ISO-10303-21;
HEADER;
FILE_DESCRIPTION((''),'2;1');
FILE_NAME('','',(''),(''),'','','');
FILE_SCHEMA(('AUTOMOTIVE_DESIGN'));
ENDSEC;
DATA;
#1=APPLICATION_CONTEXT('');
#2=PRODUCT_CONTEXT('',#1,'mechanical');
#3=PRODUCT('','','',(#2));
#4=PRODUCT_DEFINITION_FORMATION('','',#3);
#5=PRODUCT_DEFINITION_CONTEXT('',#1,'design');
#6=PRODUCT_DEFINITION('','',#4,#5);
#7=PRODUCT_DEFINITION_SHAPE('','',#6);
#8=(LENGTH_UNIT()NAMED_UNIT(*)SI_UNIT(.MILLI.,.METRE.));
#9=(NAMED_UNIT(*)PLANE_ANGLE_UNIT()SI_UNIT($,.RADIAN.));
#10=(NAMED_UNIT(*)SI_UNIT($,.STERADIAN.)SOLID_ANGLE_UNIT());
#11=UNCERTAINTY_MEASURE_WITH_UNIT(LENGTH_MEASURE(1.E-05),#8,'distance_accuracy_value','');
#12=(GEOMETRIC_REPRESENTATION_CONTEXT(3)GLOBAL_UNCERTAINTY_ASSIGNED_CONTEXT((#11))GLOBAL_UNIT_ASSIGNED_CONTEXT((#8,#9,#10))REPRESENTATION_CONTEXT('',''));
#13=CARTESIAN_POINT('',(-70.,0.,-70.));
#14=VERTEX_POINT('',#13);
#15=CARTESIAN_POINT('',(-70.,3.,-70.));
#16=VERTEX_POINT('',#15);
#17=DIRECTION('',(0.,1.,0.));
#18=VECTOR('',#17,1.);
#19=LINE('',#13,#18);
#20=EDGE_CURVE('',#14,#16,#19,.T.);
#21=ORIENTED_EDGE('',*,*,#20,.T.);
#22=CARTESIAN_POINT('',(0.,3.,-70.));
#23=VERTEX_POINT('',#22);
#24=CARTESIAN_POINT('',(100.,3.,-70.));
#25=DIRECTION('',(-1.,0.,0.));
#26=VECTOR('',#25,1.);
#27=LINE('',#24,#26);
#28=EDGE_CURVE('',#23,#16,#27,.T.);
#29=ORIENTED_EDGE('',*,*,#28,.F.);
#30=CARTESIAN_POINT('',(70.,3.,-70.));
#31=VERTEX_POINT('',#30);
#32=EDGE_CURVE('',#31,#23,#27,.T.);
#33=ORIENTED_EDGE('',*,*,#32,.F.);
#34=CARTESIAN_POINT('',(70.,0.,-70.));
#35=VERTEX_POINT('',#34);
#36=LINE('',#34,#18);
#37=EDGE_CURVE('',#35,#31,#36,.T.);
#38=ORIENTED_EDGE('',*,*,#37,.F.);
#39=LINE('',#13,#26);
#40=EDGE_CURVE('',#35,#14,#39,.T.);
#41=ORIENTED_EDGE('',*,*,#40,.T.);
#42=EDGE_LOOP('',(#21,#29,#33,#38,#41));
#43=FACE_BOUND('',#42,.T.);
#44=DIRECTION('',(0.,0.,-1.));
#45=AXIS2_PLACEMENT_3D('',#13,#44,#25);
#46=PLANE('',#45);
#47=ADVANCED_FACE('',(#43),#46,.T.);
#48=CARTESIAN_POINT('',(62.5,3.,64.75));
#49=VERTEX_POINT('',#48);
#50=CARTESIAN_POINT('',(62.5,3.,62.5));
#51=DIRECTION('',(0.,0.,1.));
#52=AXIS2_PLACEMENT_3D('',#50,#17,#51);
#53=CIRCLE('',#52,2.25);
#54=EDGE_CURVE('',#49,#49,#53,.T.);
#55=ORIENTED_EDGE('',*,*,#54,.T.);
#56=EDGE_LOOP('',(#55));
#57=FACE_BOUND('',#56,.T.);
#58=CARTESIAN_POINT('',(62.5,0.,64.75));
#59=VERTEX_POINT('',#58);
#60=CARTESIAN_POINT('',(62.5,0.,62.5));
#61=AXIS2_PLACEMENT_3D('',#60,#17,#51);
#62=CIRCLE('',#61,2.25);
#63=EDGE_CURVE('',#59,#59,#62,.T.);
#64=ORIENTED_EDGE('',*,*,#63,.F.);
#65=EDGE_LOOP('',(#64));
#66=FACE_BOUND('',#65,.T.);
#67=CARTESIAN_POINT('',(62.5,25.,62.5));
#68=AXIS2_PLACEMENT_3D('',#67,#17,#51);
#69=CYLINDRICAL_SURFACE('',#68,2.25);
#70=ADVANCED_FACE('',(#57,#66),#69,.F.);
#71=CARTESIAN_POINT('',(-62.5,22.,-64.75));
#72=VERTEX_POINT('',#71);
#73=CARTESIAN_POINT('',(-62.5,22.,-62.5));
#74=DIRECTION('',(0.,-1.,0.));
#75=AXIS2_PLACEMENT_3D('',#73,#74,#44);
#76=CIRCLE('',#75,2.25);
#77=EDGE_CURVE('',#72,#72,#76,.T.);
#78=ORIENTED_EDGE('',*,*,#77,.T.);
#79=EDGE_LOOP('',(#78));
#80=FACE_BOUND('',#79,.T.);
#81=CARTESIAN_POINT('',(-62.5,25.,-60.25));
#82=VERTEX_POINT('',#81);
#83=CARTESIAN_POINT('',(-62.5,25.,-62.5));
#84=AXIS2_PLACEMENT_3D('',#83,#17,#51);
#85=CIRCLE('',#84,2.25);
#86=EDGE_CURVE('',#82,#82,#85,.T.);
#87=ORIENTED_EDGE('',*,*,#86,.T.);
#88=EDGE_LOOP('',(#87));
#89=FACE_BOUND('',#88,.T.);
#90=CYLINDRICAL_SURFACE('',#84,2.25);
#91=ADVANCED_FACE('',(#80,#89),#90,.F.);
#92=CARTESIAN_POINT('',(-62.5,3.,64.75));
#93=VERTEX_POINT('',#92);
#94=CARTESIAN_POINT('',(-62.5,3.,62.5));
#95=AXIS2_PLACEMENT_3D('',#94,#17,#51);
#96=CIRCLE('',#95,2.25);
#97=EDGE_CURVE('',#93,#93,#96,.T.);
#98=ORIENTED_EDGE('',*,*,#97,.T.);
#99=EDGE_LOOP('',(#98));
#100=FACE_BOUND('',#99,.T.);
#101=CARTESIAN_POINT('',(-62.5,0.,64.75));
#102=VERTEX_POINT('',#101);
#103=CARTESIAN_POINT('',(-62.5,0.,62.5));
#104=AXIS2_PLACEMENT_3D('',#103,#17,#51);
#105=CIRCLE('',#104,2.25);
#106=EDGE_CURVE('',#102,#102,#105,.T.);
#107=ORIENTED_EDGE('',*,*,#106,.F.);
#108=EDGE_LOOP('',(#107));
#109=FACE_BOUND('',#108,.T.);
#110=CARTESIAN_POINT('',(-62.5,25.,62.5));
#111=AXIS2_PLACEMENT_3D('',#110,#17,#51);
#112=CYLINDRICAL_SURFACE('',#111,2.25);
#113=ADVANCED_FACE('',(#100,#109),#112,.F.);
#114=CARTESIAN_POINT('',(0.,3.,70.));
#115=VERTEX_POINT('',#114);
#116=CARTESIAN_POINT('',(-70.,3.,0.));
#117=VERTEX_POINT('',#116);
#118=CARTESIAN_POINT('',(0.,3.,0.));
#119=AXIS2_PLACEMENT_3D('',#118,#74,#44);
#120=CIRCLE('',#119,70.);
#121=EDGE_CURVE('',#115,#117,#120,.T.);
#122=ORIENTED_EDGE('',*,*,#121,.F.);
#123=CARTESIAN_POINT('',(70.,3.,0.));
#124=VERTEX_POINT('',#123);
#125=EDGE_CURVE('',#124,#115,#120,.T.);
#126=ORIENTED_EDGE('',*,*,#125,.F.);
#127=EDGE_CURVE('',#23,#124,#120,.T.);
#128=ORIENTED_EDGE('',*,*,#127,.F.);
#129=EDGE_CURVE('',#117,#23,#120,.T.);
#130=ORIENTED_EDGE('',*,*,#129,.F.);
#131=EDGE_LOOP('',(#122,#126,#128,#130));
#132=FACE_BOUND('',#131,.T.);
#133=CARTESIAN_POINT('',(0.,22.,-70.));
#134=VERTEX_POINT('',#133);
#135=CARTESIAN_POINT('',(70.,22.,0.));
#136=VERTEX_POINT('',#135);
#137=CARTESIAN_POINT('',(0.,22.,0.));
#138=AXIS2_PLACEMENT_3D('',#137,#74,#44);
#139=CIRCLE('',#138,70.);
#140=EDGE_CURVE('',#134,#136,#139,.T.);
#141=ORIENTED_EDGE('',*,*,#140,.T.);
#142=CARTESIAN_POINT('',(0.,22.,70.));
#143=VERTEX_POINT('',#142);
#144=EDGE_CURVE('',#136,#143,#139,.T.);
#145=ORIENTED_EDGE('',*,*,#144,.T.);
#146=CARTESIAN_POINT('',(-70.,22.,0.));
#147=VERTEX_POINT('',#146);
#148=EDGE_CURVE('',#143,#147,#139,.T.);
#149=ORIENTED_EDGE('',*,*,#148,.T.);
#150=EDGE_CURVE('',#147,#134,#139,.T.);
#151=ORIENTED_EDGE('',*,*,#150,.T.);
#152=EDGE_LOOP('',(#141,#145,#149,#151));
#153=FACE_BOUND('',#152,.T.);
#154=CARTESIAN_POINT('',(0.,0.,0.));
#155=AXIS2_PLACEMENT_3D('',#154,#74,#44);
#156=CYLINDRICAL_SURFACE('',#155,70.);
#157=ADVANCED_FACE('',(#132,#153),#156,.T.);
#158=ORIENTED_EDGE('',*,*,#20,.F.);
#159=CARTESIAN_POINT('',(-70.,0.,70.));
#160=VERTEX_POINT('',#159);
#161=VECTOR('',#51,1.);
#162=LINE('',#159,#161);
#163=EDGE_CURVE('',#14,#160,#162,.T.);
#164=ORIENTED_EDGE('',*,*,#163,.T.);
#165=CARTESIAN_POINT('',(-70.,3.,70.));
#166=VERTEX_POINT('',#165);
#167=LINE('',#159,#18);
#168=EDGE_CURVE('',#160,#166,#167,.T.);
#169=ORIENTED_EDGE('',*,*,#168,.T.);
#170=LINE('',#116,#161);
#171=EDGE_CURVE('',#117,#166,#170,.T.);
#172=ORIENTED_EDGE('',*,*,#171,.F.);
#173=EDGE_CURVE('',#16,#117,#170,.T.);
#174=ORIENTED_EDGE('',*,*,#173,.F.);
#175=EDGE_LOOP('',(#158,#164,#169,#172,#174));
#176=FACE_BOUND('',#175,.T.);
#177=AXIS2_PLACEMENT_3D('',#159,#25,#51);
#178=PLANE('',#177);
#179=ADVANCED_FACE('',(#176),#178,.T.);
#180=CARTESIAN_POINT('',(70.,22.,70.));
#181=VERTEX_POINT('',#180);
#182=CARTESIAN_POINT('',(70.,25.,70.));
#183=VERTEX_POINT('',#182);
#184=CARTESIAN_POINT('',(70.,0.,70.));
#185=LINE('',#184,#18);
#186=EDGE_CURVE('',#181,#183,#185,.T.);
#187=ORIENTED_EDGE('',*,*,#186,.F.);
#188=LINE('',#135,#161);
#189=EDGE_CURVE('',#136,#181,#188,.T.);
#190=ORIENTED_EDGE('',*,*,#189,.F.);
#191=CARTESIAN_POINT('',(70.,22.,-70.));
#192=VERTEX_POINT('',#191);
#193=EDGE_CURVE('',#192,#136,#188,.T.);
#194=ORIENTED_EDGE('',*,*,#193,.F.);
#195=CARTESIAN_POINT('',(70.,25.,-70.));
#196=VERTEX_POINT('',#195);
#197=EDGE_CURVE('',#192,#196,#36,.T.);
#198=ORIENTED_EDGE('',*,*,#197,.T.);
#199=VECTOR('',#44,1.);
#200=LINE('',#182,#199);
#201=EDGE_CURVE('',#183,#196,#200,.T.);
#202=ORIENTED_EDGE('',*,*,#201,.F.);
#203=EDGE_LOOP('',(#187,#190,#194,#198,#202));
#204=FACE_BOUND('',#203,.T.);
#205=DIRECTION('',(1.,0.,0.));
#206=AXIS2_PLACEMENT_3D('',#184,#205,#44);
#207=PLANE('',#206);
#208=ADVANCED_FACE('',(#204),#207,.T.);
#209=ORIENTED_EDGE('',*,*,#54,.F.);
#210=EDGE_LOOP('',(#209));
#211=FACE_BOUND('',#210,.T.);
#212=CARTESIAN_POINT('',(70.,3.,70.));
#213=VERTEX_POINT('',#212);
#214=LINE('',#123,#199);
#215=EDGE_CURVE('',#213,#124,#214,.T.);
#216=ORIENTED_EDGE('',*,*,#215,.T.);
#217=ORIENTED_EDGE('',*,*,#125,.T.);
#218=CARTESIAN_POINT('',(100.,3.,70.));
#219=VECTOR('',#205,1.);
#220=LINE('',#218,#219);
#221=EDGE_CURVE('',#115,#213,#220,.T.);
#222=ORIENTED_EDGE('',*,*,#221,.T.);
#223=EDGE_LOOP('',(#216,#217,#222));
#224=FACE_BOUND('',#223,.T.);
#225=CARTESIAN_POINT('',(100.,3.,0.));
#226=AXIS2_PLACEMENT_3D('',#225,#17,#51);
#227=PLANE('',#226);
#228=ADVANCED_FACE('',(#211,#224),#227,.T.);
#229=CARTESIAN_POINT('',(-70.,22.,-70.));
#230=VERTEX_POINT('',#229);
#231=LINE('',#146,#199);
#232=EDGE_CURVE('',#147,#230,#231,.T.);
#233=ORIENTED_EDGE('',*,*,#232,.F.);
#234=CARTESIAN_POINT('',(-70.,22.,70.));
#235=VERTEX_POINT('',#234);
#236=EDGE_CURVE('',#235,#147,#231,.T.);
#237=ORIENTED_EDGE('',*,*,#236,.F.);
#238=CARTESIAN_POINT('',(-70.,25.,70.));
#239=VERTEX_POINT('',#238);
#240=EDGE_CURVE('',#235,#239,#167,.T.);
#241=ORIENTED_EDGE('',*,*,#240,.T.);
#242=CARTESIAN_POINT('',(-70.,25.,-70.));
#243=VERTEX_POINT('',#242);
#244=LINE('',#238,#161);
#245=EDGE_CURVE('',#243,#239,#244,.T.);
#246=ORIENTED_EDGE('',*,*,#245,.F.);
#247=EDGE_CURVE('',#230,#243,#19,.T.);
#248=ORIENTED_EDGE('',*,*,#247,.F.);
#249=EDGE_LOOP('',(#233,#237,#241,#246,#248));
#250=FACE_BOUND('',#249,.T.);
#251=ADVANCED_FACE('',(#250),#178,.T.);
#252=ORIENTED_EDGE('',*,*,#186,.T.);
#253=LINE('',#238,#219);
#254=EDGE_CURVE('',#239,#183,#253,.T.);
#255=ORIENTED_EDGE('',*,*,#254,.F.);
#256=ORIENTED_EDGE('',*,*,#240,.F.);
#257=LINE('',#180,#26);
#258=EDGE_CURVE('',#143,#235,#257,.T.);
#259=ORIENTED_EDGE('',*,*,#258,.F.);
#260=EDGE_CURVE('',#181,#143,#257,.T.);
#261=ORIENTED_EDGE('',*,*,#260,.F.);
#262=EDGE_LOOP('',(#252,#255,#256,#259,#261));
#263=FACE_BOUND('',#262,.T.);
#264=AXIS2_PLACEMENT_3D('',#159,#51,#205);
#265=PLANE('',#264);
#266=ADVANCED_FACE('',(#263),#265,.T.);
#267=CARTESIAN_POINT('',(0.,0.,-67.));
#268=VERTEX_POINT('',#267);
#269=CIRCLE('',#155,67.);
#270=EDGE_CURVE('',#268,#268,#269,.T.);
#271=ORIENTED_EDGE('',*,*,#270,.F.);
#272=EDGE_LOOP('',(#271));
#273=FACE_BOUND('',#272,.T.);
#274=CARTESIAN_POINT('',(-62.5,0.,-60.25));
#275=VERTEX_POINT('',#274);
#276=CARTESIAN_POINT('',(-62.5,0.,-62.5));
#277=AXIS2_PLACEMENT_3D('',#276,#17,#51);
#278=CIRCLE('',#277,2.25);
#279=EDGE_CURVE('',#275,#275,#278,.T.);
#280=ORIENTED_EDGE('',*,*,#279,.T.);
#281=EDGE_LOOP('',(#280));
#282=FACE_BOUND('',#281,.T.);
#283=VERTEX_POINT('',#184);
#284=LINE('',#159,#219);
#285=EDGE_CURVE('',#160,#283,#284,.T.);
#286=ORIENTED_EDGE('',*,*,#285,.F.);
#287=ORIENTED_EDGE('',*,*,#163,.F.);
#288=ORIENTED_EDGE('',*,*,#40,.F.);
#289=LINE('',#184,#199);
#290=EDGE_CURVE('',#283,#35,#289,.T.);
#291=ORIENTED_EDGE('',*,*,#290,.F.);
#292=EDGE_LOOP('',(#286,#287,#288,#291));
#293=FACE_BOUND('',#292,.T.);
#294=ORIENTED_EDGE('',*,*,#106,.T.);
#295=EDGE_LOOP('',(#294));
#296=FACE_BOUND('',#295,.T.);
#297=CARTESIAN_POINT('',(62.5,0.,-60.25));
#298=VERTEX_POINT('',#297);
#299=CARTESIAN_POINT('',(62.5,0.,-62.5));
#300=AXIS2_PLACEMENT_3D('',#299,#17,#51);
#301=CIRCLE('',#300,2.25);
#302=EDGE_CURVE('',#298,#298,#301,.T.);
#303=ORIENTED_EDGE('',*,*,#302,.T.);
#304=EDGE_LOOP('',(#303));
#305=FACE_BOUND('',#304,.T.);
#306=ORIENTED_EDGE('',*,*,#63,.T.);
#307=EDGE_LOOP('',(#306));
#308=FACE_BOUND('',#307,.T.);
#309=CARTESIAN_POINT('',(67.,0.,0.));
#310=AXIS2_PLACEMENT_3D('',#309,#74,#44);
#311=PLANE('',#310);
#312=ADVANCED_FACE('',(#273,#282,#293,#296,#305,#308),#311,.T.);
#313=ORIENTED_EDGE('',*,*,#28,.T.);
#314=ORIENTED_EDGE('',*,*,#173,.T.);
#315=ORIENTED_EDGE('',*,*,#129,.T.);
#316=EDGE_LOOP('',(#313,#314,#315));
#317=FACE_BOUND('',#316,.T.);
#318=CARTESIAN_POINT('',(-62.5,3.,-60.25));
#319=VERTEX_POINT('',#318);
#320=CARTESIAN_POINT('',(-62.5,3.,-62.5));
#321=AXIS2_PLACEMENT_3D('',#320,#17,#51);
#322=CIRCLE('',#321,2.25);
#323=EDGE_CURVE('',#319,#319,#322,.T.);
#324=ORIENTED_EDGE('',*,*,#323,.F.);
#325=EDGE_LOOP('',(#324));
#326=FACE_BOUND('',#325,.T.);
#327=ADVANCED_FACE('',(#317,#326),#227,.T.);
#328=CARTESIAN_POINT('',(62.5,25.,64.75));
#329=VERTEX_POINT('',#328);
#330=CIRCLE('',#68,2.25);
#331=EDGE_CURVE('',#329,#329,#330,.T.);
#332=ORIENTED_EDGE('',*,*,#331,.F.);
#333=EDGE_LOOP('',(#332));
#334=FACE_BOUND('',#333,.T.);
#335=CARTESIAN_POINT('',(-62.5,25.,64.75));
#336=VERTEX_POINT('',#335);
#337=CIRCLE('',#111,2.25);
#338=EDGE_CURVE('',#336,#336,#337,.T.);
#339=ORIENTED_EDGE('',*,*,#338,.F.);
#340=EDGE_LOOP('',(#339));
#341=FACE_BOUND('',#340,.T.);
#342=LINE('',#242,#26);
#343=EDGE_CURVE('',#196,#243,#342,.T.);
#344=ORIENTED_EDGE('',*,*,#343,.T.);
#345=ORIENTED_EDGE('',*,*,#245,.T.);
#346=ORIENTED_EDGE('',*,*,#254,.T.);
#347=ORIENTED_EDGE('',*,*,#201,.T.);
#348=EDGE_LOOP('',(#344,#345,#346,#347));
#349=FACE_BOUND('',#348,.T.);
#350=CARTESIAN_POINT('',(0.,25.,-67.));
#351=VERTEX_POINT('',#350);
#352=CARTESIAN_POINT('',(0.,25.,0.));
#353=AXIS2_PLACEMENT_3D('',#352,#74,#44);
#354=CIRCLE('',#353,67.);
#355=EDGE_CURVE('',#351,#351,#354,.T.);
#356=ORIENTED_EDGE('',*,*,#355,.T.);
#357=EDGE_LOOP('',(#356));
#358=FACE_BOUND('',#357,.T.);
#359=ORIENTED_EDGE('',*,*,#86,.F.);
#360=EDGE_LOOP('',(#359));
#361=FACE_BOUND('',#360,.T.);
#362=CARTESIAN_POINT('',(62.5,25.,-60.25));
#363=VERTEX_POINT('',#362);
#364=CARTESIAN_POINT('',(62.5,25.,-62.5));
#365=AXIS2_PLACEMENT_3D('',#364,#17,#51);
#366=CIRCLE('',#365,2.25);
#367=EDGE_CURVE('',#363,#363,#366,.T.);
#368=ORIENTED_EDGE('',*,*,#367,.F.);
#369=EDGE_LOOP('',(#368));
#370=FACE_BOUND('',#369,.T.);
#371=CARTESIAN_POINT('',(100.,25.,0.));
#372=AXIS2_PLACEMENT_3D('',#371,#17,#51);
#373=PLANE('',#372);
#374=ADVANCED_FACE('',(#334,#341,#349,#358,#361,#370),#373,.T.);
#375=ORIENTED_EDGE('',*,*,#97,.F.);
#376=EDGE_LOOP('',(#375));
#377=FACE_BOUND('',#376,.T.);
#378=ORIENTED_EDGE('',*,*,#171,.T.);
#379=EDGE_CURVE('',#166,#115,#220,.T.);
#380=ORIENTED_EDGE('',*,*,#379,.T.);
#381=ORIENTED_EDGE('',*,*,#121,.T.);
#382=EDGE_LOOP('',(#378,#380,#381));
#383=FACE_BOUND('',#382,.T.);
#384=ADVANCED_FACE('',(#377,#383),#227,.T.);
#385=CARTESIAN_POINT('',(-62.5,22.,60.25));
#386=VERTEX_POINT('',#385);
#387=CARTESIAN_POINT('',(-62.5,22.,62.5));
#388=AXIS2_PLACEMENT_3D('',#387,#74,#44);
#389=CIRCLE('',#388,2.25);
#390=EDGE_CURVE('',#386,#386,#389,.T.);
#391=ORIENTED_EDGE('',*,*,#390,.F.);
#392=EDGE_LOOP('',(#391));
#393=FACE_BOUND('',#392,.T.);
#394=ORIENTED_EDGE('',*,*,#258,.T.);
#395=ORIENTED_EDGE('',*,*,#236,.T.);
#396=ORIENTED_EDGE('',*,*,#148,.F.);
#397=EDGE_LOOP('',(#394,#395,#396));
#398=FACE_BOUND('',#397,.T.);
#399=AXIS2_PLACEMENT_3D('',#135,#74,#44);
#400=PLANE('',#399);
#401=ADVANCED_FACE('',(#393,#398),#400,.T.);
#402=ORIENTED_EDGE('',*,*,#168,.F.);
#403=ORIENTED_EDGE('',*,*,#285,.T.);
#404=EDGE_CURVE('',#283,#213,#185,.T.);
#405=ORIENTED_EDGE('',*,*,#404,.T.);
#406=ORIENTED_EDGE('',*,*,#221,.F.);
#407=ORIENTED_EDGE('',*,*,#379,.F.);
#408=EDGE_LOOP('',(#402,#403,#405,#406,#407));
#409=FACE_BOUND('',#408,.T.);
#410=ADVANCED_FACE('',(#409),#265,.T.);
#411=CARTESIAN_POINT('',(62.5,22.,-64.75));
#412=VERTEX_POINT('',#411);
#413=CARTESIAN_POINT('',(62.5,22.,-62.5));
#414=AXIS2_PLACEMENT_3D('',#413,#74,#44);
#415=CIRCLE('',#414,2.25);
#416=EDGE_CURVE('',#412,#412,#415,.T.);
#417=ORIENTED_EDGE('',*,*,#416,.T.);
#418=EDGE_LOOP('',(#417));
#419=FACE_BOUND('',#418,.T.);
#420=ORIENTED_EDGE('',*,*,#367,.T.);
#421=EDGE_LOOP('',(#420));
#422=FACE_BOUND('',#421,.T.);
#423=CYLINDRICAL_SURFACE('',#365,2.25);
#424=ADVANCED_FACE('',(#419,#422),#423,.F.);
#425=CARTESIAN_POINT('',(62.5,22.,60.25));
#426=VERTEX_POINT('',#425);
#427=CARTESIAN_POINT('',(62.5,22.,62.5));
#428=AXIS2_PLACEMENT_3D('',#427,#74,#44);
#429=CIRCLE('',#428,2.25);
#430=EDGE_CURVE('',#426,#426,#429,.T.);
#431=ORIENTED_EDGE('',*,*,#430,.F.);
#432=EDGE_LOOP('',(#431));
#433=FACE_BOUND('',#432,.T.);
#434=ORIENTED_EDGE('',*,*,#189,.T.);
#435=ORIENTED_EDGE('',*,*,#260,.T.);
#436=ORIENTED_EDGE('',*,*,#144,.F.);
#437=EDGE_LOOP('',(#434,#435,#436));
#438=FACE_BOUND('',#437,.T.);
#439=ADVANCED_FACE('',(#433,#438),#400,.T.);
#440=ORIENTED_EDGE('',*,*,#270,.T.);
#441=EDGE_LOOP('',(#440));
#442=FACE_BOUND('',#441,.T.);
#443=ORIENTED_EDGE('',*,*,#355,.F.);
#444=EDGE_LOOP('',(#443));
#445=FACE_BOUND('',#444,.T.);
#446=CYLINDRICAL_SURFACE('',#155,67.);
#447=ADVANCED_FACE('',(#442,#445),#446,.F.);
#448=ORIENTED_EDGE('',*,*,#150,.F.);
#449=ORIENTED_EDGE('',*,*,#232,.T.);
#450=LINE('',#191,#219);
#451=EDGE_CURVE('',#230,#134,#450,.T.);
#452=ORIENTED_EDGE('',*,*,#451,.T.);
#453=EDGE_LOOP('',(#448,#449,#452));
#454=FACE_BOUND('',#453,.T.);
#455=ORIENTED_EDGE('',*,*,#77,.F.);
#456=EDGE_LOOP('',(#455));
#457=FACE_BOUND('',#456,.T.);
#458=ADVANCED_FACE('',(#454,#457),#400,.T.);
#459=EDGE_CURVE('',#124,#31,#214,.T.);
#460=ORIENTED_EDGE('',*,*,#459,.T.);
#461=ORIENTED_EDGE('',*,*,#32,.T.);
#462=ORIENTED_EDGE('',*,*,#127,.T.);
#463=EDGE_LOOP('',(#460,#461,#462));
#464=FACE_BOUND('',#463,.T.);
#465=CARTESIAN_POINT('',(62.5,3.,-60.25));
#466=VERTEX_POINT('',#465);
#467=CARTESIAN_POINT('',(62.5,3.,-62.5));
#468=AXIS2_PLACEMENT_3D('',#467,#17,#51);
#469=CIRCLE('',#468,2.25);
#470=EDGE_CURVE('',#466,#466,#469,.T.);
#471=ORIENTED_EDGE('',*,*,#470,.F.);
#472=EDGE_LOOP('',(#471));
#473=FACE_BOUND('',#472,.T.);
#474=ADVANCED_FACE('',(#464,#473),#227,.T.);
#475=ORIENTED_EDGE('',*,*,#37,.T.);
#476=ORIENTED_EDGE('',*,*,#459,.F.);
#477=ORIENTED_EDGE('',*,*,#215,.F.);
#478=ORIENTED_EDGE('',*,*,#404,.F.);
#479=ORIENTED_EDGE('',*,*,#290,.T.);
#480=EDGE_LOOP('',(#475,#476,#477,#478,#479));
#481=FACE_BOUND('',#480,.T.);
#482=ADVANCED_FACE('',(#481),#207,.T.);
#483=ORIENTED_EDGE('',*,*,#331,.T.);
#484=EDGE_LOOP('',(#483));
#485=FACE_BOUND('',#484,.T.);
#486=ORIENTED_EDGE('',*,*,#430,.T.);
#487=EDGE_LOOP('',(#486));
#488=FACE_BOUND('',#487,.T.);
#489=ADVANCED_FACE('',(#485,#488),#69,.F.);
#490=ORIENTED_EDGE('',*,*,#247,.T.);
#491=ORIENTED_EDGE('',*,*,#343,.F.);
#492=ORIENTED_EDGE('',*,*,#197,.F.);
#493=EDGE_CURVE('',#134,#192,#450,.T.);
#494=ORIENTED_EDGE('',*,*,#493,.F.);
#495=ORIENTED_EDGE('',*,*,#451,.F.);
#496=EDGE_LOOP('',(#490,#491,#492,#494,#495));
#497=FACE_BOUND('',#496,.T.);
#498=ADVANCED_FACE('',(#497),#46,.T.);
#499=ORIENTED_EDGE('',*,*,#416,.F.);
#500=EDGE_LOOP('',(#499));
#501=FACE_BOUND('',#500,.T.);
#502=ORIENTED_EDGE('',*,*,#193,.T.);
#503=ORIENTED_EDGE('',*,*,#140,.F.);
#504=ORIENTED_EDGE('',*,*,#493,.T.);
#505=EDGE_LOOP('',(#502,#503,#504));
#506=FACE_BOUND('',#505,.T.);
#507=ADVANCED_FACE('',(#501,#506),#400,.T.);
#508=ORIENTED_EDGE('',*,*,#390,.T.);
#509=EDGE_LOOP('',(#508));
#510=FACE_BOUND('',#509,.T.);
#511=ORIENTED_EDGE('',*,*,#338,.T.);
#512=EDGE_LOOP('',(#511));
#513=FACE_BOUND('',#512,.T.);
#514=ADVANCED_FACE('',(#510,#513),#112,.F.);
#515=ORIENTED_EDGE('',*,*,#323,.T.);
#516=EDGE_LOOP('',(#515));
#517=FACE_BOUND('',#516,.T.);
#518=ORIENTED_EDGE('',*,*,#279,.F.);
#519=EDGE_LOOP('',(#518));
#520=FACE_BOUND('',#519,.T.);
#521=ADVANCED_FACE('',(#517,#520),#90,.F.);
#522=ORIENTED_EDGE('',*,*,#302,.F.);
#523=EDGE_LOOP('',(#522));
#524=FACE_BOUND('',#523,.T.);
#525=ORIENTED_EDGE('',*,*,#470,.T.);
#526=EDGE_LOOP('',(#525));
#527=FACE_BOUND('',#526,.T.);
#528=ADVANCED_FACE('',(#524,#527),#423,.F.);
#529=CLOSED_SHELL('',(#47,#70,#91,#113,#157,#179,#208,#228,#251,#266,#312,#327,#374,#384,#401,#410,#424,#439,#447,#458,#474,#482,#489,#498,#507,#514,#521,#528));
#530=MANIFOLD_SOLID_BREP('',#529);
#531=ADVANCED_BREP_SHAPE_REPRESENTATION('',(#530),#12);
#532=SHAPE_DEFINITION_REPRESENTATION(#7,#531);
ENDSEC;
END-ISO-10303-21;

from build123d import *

# Parameters (mm, degrees)
SKETCH2_OUTSIDE_W            = 258.79
SKETCH2_OUTSIDE_H            = 258.79
SKETCH2_OUTSIDE_W_2          = 140
SKETCH2_OUTSIDE_H_2          = 140
SQUARE_SHAPE_CUTOUT_DEPTH    = 144.614066163
M4_CLEARANCE_HOLE1_OUTLINE_R = 2.25
M4_CLEARANCE_HOLE1_DEPTH     = 25


# Read off the part's stored shape, not the designer's step: M4 Clearance Hole1
with BuildPart() as part:
    # Sketch1 → body (revolve)
    with BuildSketch(Plane.XY, mode=Mode.PRIVATE) as body_sk:
        Polygon((67, 0), (100, 0), (100, 3), (70, 3), (70, 22), (100, 22), (100, 25), (67, 25), align=None)
    revolve(body_sk.sketch.rotate(Axis((0, 0, 0), (0, 1, 0)), 90), axis=Axis((0, 0, 0), (0, 1, 0)))

    # Sketch2 outside → square_shape_cutout (cut, through all)
    with BuildSketch(Plane(origin=(0, 25, 0), x_dir=(1, 0, 0), z_dir=(0, 1, 0))):
        Rectangle(SKETCH2_OUTSIDE_W, SKETCH2_OUTSIDE_H)
        Rectangle(SKETCH2_OUTSIDE_W_2, SKETCH2_OUTSIDE_H_2, mode=Mode.SUBTRACT)
    extrude(amount=-SQUARE_SHAPE_CUTOUT_DEPTH, mode=Mode.SUBTRACT)

    # M4 Clearance Hole1 outline → M4 Clearance Hole1 (cut)
    with BuildSketch(Plane(origin=(0, 0, 0), x_dir=(1, 0, 0), z_dir=(0, 1, 0))):
        with Locations((62.5, 62.5)):
            Circle(M4_CLEARANCE_HOLE1_OUTLINE_R)
        with Locations((-62.5, -62.5)):
            Circle(M4_CLEARANCE_HOLE1_OUTLINE_R)
        with Locations((62.5, -62.5)):
            Circle(M4_CLEARANCE_HOLE1_OUTLINE_R)
        with Locations((-62.5, 62.5)):
            Circle(M4_CLEARANCE_HOLE1_OUTLINE_R)
    extrude(amount=M4_CLEARANCE_HOLE1_DEPTH, mode=Mode.SUBTRACT)


solid = part.part
